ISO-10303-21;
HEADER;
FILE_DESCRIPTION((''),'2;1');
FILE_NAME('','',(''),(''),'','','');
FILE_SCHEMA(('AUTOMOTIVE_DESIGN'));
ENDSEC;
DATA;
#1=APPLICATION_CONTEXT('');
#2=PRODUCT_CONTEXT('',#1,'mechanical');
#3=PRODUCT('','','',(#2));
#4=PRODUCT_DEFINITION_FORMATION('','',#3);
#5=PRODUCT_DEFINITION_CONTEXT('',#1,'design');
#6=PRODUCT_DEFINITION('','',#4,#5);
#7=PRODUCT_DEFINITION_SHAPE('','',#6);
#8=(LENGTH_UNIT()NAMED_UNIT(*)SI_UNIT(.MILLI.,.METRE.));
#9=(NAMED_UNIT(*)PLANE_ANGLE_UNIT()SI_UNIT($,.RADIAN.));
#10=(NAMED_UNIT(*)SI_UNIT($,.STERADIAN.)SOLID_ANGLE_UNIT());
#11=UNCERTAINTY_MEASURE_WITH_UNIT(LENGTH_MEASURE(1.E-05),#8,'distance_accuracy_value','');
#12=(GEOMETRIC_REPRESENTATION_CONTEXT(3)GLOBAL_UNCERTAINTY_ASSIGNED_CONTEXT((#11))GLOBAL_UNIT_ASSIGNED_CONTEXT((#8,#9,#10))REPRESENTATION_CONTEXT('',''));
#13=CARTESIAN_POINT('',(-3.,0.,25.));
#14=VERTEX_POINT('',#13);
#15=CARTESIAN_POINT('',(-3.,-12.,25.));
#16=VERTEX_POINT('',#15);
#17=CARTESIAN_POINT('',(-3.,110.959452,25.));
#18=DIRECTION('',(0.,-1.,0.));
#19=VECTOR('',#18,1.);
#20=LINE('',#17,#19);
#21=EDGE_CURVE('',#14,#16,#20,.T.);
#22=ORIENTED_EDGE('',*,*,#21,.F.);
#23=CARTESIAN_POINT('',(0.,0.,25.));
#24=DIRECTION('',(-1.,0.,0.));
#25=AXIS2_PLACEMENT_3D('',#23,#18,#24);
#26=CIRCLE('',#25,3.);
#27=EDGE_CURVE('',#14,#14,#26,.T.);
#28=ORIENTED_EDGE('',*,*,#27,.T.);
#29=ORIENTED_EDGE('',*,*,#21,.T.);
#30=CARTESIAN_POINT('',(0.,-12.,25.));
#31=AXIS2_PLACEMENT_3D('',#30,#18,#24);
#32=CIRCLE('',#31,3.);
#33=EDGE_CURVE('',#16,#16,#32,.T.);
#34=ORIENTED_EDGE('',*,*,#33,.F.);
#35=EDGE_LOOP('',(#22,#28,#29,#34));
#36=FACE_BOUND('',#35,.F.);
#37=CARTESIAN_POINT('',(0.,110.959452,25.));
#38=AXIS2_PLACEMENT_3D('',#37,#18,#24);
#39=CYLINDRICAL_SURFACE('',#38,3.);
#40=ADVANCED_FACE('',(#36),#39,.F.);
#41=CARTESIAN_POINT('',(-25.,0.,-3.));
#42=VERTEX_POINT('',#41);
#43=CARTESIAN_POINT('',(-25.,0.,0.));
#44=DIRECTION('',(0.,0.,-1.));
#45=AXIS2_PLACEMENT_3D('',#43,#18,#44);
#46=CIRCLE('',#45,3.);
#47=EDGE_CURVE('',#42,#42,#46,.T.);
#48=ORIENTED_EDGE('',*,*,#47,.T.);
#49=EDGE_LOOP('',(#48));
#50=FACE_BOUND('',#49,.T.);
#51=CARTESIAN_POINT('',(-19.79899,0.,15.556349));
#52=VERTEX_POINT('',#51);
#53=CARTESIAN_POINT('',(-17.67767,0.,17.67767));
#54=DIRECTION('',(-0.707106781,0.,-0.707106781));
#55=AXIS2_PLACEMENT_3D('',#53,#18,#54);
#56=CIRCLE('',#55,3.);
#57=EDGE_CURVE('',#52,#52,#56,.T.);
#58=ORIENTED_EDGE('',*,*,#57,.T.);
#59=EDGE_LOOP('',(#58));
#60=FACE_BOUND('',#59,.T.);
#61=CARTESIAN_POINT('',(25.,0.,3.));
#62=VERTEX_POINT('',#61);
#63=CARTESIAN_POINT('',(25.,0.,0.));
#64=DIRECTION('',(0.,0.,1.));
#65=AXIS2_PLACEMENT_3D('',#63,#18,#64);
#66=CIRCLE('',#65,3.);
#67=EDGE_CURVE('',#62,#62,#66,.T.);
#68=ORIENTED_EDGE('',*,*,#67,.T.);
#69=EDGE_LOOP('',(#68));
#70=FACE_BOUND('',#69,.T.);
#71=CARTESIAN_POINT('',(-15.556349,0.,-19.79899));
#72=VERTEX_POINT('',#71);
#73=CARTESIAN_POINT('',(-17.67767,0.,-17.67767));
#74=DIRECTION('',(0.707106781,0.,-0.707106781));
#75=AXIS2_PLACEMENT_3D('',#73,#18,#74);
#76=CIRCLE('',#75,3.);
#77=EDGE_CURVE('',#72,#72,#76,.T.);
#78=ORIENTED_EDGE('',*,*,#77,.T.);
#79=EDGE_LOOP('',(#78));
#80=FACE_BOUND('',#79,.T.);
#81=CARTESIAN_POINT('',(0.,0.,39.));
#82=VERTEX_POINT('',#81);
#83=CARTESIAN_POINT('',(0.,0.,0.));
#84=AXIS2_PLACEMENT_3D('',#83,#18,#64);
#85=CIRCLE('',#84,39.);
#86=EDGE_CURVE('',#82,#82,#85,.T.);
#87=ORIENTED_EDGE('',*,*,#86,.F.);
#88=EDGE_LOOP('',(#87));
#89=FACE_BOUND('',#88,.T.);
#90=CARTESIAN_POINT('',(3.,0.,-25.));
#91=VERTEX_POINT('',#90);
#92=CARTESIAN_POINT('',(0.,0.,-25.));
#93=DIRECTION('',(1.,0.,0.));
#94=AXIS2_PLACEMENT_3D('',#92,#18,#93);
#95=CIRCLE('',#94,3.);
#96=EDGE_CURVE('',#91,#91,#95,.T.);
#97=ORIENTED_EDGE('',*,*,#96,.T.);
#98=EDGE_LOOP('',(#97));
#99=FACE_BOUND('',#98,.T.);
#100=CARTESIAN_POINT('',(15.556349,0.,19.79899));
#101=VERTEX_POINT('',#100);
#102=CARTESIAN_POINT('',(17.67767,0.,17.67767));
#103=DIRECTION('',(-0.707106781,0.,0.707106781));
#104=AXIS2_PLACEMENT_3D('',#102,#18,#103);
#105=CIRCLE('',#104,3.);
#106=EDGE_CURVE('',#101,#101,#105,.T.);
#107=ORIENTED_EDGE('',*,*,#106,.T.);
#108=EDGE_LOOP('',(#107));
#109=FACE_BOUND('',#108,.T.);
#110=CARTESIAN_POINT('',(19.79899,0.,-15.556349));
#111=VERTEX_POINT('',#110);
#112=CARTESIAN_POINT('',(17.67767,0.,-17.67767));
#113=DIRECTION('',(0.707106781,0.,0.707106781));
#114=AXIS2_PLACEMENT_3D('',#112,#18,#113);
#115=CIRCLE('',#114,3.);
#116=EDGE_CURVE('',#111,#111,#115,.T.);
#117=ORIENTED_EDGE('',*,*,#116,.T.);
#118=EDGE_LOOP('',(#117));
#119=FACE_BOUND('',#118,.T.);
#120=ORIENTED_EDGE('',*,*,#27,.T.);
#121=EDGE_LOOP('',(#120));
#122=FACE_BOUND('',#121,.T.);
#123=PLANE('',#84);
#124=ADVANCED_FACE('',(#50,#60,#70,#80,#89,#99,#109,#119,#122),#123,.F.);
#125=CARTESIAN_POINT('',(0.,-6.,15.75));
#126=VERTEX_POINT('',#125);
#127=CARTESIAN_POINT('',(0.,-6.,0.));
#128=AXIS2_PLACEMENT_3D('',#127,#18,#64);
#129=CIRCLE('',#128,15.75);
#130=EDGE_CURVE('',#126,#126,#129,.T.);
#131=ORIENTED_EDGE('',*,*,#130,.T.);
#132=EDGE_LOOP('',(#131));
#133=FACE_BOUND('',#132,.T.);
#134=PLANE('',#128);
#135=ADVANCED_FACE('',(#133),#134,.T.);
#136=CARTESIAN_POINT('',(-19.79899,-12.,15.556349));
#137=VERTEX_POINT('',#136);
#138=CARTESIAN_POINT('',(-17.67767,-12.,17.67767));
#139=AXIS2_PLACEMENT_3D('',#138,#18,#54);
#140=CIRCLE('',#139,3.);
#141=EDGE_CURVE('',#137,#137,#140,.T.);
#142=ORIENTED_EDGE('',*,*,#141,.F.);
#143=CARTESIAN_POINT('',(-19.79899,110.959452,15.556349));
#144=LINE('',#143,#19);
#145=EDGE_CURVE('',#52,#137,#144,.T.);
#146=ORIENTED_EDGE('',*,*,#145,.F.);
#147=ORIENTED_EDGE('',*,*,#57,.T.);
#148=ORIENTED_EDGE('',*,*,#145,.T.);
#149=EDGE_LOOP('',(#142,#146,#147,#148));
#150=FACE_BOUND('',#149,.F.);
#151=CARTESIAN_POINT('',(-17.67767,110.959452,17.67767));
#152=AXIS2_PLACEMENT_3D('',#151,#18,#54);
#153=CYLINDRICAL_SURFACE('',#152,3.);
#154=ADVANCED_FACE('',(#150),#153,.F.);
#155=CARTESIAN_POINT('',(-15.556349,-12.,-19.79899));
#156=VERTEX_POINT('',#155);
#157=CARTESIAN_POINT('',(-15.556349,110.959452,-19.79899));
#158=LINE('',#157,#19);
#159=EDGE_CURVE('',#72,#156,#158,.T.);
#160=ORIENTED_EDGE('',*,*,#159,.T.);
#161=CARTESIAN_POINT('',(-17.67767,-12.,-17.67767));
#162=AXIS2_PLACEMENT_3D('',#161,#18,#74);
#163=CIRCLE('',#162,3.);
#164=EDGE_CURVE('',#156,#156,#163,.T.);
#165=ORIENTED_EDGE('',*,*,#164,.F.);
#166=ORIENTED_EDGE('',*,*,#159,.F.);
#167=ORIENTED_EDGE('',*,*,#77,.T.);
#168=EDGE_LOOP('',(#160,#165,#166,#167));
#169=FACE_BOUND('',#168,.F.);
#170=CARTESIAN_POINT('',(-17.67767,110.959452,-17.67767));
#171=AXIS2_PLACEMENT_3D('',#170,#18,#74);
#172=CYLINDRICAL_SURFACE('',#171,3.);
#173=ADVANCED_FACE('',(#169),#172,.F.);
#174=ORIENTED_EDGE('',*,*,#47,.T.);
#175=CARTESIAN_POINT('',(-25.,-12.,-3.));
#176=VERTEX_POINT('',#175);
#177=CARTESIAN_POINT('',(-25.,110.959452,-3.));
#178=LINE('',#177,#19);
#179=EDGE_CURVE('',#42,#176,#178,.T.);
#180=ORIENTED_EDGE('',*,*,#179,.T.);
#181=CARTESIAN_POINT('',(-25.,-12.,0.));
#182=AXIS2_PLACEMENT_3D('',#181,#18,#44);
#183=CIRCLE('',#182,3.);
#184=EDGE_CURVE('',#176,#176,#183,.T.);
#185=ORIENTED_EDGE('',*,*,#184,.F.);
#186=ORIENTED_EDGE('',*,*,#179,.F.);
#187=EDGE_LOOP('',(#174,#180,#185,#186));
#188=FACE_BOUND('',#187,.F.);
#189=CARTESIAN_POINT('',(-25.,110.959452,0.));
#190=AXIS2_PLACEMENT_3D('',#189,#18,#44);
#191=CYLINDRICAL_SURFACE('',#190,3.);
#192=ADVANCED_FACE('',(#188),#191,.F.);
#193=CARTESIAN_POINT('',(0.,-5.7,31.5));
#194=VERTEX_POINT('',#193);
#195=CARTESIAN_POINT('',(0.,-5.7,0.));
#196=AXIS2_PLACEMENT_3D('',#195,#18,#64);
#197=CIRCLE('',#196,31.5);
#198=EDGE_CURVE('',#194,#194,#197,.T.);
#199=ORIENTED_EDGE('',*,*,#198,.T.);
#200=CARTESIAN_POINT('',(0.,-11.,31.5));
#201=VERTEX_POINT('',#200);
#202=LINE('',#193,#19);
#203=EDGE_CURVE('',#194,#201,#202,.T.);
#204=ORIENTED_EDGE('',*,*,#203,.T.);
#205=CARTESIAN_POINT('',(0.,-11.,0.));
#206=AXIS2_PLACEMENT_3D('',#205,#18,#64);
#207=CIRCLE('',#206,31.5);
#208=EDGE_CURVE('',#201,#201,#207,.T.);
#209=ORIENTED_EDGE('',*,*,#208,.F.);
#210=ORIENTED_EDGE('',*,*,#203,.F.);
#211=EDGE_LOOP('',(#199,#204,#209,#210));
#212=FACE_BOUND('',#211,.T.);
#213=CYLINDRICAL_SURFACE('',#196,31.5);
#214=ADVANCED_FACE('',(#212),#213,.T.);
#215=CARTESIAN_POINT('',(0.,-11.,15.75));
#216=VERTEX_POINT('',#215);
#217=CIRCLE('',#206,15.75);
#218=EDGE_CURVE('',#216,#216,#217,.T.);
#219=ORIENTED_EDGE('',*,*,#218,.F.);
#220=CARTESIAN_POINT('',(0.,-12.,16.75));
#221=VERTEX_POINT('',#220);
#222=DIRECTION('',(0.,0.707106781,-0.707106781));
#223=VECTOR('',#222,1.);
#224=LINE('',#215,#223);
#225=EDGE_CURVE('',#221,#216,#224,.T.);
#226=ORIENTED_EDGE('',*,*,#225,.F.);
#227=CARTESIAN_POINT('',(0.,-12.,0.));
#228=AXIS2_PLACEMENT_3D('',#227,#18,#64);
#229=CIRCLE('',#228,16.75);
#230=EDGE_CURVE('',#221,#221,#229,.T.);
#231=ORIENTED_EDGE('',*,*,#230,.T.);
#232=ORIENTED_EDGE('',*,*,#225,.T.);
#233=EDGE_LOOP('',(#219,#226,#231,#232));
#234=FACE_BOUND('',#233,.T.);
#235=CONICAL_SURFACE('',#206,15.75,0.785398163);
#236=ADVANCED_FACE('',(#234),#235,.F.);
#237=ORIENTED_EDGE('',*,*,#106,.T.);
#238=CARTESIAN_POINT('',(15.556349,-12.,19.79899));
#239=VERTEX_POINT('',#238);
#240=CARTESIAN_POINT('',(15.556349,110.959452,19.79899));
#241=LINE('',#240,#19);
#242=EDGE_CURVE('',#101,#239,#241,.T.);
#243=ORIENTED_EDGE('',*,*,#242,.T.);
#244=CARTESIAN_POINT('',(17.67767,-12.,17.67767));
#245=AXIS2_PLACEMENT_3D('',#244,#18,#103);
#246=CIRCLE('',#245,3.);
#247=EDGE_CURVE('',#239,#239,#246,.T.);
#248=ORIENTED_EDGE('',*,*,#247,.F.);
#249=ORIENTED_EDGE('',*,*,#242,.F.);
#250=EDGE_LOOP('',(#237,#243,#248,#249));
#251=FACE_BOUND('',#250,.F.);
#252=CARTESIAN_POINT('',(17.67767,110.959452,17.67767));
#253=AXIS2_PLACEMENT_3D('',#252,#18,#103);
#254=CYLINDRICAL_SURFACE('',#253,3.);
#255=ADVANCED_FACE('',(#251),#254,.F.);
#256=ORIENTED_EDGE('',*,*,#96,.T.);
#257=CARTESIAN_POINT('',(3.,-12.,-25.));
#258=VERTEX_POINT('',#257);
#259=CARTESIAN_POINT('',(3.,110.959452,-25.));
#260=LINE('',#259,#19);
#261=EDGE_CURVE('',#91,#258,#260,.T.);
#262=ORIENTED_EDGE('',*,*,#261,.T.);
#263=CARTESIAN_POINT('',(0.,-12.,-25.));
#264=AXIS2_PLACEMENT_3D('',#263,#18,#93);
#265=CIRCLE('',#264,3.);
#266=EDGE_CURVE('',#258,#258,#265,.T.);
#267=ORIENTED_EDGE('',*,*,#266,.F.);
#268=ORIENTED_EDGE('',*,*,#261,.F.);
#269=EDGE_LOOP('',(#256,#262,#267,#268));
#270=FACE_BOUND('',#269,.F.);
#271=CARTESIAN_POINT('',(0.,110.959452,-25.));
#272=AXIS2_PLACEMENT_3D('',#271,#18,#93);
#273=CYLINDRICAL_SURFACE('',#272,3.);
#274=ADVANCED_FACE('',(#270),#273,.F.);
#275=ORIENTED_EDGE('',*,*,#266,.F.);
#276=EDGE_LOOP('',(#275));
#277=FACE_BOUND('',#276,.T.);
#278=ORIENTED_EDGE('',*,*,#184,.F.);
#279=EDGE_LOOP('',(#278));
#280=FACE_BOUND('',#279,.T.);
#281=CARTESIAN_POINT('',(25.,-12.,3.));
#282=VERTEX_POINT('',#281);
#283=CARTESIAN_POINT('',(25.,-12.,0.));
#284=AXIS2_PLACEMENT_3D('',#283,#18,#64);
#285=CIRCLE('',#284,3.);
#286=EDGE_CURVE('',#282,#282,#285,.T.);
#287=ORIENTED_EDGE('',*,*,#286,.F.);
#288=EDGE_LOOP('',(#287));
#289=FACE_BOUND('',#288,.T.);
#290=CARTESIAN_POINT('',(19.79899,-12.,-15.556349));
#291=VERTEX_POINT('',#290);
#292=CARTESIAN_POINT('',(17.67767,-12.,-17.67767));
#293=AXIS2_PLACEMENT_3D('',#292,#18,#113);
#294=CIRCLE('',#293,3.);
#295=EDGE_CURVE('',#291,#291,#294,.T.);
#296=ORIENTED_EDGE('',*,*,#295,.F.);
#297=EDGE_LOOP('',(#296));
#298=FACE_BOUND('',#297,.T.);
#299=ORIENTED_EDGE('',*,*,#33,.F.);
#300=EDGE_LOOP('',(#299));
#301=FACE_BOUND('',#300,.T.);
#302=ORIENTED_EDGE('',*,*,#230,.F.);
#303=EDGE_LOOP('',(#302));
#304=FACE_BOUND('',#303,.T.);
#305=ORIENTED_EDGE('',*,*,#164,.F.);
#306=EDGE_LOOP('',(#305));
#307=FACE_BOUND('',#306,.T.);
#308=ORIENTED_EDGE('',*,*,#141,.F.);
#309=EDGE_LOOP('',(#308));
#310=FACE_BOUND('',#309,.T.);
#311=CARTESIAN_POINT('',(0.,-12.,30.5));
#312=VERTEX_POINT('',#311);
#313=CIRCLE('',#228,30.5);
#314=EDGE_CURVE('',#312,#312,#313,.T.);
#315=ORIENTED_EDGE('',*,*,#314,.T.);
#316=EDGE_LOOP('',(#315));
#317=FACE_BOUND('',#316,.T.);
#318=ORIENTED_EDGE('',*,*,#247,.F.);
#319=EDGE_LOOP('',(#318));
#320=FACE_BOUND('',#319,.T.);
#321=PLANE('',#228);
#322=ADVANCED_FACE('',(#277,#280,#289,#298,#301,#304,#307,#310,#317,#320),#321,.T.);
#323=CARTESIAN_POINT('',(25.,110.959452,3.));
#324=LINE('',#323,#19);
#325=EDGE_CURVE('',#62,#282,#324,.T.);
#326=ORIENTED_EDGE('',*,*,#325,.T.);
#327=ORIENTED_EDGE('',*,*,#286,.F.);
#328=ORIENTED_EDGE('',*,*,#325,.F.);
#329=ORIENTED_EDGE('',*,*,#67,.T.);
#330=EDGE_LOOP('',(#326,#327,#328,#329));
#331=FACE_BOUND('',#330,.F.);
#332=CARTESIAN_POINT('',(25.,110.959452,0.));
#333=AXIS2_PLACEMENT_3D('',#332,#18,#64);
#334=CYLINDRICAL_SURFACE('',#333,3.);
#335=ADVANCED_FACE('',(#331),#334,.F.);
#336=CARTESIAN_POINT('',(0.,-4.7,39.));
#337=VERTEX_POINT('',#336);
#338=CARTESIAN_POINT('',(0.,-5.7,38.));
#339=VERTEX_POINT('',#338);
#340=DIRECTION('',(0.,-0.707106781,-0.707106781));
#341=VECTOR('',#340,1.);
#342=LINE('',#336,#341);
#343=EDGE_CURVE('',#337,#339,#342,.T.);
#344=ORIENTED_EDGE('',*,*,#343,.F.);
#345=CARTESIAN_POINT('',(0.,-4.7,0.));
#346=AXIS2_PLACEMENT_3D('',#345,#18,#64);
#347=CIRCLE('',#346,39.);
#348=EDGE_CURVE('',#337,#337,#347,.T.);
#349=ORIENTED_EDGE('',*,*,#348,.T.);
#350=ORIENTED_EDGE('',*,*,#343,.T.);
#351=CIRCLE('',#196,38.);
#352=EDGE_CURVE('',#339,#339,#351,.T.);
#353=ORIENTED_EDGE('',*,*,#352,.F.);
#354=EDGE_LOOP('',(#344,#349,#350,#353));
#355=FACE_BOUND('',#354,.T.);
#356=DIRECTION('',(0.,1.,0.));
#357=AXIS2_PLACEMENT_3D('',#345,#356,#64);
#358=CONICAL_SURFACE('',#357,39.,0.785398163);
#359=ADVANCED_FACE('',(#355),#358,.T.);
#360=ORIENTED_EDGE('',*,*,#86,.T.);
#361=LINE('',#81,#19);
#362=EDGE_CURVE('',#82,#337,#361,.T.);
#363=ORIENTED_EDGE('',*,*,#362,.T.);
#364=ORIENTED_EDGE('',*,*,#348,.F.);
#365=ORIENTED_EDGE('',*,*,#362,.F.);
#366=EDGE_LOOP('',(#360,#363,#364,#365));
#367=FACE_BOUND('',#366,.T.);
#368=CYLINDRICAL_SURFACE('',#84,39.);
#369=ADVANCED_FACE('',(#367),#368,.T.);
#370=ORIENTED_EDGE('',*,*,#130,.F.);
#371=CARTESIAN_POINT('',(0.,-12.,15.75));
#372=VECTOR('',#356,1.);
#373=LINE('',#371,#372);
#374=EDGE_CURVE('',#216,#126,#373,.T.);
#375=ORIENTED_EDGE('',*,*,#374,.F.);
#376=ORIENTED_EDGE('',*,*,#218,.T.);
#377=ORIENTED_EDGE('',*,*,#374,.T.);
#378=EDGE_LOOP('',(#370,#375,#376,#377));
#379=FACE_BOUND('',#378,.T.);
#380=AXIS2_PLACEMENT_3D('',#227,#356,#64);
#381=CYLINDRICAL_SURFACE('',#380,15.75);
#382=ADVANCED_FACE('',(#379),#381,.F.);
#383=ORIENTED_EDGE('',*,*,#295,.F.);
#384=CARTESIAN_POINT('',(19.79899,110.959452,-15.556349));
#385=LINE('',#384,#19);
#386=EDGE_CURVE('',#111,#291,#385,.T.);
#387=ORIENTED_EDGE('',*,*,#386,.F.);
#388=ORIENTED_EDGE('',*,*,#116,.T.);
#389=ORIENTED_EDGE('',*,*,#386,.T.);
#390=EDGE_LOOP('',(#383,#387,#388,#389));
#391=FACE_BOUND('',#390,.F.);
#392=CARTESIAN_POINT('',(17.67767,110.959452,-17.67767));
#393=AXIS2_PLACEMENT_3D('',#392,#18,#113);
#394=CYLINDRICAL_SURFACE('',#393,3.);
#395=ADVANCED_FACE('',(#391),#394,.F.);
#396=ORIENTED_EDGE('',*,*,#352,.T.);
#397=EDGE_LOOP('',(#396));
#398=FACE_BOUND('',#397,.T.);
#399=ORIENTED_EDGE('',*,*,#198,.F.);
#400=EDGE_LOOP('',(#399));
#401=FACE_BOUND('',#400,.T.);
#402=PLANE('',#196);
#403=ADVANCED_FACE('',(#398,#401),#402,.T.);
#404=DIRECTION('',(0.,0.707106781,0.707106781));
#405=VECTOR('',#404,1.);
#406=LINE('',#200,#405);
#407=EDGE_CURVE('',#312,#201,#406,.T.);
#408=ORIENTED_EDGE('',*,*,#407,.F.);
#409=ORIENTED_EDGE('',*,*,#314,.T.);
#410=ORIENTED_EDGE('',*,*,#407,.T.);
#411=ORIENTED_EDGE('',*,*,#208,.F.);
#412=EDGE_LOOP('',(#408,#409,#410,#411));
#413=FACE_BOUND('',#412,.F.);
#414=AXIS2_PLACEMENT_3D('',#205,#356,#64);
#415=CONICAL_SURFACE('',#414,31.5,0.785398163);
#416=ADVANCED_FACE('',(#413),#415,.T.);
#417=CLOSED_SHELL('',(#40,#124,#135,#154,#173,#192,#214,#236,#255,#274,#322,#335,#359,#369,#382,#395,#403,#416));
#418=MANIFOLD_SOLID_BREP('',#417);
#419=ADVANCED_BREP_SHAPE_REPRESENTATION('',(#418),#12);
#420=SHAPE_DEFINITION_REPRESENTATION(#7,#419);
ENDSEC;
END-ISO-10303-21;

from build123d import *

# Parameters (mm, degrees)
F3_D            = 6
F3_COPIES_COUNT = 8
F4_SIZE         = 1


# Not quite as in the source:
# - a pattern or mirror of a feature is missing from the dataset's text; its kind, count and spacing are read off the source's solid


with BuildPart() as f1:
    # F0 (on Right) → F1 (revolve)
    with BuildSketch(Plane.YZ):
        Polygon((-6, 0), (0, 0), (0, 39), (-5.7, 39), (-5.7, 31.5), (-12, 31.5), (-12, 15.75), (-6, 15.75), align=None)
    revolve(axis=Axis((0, -15.2627385695, 0), (0, -1, 0)))

    # F3 (through all)
    with Locations(Plane(origin=(0, 0, 0), x_dir=(1, 0, 0), z_dir=(0, 1, 0))):
        with Locations((0, -25)):
            f3 = Hole(F3_D / 2)

    # F3_copies: F3 ×8 about axis
    f3_copies_axis = Axis((0, 0, 0), (0, 1, 0))
    for i in range(1, F3_COPIES_COUNT):
        add(f3.rotate(f3_copies_axis, i * 360 / F3_COPIES_COUNT), mode=Mode.SUBTRACT)

    # F4
    f4_edges = [f1.edges().sort_by_distance(p)[0] for p in [
        (0, -12, -15.75),
        (0, -12, -31.5),
        (0, -5.7, -39),
    ]]
    chamfer(f4_edges, length=F4_SIZE)


solid = f1.part
